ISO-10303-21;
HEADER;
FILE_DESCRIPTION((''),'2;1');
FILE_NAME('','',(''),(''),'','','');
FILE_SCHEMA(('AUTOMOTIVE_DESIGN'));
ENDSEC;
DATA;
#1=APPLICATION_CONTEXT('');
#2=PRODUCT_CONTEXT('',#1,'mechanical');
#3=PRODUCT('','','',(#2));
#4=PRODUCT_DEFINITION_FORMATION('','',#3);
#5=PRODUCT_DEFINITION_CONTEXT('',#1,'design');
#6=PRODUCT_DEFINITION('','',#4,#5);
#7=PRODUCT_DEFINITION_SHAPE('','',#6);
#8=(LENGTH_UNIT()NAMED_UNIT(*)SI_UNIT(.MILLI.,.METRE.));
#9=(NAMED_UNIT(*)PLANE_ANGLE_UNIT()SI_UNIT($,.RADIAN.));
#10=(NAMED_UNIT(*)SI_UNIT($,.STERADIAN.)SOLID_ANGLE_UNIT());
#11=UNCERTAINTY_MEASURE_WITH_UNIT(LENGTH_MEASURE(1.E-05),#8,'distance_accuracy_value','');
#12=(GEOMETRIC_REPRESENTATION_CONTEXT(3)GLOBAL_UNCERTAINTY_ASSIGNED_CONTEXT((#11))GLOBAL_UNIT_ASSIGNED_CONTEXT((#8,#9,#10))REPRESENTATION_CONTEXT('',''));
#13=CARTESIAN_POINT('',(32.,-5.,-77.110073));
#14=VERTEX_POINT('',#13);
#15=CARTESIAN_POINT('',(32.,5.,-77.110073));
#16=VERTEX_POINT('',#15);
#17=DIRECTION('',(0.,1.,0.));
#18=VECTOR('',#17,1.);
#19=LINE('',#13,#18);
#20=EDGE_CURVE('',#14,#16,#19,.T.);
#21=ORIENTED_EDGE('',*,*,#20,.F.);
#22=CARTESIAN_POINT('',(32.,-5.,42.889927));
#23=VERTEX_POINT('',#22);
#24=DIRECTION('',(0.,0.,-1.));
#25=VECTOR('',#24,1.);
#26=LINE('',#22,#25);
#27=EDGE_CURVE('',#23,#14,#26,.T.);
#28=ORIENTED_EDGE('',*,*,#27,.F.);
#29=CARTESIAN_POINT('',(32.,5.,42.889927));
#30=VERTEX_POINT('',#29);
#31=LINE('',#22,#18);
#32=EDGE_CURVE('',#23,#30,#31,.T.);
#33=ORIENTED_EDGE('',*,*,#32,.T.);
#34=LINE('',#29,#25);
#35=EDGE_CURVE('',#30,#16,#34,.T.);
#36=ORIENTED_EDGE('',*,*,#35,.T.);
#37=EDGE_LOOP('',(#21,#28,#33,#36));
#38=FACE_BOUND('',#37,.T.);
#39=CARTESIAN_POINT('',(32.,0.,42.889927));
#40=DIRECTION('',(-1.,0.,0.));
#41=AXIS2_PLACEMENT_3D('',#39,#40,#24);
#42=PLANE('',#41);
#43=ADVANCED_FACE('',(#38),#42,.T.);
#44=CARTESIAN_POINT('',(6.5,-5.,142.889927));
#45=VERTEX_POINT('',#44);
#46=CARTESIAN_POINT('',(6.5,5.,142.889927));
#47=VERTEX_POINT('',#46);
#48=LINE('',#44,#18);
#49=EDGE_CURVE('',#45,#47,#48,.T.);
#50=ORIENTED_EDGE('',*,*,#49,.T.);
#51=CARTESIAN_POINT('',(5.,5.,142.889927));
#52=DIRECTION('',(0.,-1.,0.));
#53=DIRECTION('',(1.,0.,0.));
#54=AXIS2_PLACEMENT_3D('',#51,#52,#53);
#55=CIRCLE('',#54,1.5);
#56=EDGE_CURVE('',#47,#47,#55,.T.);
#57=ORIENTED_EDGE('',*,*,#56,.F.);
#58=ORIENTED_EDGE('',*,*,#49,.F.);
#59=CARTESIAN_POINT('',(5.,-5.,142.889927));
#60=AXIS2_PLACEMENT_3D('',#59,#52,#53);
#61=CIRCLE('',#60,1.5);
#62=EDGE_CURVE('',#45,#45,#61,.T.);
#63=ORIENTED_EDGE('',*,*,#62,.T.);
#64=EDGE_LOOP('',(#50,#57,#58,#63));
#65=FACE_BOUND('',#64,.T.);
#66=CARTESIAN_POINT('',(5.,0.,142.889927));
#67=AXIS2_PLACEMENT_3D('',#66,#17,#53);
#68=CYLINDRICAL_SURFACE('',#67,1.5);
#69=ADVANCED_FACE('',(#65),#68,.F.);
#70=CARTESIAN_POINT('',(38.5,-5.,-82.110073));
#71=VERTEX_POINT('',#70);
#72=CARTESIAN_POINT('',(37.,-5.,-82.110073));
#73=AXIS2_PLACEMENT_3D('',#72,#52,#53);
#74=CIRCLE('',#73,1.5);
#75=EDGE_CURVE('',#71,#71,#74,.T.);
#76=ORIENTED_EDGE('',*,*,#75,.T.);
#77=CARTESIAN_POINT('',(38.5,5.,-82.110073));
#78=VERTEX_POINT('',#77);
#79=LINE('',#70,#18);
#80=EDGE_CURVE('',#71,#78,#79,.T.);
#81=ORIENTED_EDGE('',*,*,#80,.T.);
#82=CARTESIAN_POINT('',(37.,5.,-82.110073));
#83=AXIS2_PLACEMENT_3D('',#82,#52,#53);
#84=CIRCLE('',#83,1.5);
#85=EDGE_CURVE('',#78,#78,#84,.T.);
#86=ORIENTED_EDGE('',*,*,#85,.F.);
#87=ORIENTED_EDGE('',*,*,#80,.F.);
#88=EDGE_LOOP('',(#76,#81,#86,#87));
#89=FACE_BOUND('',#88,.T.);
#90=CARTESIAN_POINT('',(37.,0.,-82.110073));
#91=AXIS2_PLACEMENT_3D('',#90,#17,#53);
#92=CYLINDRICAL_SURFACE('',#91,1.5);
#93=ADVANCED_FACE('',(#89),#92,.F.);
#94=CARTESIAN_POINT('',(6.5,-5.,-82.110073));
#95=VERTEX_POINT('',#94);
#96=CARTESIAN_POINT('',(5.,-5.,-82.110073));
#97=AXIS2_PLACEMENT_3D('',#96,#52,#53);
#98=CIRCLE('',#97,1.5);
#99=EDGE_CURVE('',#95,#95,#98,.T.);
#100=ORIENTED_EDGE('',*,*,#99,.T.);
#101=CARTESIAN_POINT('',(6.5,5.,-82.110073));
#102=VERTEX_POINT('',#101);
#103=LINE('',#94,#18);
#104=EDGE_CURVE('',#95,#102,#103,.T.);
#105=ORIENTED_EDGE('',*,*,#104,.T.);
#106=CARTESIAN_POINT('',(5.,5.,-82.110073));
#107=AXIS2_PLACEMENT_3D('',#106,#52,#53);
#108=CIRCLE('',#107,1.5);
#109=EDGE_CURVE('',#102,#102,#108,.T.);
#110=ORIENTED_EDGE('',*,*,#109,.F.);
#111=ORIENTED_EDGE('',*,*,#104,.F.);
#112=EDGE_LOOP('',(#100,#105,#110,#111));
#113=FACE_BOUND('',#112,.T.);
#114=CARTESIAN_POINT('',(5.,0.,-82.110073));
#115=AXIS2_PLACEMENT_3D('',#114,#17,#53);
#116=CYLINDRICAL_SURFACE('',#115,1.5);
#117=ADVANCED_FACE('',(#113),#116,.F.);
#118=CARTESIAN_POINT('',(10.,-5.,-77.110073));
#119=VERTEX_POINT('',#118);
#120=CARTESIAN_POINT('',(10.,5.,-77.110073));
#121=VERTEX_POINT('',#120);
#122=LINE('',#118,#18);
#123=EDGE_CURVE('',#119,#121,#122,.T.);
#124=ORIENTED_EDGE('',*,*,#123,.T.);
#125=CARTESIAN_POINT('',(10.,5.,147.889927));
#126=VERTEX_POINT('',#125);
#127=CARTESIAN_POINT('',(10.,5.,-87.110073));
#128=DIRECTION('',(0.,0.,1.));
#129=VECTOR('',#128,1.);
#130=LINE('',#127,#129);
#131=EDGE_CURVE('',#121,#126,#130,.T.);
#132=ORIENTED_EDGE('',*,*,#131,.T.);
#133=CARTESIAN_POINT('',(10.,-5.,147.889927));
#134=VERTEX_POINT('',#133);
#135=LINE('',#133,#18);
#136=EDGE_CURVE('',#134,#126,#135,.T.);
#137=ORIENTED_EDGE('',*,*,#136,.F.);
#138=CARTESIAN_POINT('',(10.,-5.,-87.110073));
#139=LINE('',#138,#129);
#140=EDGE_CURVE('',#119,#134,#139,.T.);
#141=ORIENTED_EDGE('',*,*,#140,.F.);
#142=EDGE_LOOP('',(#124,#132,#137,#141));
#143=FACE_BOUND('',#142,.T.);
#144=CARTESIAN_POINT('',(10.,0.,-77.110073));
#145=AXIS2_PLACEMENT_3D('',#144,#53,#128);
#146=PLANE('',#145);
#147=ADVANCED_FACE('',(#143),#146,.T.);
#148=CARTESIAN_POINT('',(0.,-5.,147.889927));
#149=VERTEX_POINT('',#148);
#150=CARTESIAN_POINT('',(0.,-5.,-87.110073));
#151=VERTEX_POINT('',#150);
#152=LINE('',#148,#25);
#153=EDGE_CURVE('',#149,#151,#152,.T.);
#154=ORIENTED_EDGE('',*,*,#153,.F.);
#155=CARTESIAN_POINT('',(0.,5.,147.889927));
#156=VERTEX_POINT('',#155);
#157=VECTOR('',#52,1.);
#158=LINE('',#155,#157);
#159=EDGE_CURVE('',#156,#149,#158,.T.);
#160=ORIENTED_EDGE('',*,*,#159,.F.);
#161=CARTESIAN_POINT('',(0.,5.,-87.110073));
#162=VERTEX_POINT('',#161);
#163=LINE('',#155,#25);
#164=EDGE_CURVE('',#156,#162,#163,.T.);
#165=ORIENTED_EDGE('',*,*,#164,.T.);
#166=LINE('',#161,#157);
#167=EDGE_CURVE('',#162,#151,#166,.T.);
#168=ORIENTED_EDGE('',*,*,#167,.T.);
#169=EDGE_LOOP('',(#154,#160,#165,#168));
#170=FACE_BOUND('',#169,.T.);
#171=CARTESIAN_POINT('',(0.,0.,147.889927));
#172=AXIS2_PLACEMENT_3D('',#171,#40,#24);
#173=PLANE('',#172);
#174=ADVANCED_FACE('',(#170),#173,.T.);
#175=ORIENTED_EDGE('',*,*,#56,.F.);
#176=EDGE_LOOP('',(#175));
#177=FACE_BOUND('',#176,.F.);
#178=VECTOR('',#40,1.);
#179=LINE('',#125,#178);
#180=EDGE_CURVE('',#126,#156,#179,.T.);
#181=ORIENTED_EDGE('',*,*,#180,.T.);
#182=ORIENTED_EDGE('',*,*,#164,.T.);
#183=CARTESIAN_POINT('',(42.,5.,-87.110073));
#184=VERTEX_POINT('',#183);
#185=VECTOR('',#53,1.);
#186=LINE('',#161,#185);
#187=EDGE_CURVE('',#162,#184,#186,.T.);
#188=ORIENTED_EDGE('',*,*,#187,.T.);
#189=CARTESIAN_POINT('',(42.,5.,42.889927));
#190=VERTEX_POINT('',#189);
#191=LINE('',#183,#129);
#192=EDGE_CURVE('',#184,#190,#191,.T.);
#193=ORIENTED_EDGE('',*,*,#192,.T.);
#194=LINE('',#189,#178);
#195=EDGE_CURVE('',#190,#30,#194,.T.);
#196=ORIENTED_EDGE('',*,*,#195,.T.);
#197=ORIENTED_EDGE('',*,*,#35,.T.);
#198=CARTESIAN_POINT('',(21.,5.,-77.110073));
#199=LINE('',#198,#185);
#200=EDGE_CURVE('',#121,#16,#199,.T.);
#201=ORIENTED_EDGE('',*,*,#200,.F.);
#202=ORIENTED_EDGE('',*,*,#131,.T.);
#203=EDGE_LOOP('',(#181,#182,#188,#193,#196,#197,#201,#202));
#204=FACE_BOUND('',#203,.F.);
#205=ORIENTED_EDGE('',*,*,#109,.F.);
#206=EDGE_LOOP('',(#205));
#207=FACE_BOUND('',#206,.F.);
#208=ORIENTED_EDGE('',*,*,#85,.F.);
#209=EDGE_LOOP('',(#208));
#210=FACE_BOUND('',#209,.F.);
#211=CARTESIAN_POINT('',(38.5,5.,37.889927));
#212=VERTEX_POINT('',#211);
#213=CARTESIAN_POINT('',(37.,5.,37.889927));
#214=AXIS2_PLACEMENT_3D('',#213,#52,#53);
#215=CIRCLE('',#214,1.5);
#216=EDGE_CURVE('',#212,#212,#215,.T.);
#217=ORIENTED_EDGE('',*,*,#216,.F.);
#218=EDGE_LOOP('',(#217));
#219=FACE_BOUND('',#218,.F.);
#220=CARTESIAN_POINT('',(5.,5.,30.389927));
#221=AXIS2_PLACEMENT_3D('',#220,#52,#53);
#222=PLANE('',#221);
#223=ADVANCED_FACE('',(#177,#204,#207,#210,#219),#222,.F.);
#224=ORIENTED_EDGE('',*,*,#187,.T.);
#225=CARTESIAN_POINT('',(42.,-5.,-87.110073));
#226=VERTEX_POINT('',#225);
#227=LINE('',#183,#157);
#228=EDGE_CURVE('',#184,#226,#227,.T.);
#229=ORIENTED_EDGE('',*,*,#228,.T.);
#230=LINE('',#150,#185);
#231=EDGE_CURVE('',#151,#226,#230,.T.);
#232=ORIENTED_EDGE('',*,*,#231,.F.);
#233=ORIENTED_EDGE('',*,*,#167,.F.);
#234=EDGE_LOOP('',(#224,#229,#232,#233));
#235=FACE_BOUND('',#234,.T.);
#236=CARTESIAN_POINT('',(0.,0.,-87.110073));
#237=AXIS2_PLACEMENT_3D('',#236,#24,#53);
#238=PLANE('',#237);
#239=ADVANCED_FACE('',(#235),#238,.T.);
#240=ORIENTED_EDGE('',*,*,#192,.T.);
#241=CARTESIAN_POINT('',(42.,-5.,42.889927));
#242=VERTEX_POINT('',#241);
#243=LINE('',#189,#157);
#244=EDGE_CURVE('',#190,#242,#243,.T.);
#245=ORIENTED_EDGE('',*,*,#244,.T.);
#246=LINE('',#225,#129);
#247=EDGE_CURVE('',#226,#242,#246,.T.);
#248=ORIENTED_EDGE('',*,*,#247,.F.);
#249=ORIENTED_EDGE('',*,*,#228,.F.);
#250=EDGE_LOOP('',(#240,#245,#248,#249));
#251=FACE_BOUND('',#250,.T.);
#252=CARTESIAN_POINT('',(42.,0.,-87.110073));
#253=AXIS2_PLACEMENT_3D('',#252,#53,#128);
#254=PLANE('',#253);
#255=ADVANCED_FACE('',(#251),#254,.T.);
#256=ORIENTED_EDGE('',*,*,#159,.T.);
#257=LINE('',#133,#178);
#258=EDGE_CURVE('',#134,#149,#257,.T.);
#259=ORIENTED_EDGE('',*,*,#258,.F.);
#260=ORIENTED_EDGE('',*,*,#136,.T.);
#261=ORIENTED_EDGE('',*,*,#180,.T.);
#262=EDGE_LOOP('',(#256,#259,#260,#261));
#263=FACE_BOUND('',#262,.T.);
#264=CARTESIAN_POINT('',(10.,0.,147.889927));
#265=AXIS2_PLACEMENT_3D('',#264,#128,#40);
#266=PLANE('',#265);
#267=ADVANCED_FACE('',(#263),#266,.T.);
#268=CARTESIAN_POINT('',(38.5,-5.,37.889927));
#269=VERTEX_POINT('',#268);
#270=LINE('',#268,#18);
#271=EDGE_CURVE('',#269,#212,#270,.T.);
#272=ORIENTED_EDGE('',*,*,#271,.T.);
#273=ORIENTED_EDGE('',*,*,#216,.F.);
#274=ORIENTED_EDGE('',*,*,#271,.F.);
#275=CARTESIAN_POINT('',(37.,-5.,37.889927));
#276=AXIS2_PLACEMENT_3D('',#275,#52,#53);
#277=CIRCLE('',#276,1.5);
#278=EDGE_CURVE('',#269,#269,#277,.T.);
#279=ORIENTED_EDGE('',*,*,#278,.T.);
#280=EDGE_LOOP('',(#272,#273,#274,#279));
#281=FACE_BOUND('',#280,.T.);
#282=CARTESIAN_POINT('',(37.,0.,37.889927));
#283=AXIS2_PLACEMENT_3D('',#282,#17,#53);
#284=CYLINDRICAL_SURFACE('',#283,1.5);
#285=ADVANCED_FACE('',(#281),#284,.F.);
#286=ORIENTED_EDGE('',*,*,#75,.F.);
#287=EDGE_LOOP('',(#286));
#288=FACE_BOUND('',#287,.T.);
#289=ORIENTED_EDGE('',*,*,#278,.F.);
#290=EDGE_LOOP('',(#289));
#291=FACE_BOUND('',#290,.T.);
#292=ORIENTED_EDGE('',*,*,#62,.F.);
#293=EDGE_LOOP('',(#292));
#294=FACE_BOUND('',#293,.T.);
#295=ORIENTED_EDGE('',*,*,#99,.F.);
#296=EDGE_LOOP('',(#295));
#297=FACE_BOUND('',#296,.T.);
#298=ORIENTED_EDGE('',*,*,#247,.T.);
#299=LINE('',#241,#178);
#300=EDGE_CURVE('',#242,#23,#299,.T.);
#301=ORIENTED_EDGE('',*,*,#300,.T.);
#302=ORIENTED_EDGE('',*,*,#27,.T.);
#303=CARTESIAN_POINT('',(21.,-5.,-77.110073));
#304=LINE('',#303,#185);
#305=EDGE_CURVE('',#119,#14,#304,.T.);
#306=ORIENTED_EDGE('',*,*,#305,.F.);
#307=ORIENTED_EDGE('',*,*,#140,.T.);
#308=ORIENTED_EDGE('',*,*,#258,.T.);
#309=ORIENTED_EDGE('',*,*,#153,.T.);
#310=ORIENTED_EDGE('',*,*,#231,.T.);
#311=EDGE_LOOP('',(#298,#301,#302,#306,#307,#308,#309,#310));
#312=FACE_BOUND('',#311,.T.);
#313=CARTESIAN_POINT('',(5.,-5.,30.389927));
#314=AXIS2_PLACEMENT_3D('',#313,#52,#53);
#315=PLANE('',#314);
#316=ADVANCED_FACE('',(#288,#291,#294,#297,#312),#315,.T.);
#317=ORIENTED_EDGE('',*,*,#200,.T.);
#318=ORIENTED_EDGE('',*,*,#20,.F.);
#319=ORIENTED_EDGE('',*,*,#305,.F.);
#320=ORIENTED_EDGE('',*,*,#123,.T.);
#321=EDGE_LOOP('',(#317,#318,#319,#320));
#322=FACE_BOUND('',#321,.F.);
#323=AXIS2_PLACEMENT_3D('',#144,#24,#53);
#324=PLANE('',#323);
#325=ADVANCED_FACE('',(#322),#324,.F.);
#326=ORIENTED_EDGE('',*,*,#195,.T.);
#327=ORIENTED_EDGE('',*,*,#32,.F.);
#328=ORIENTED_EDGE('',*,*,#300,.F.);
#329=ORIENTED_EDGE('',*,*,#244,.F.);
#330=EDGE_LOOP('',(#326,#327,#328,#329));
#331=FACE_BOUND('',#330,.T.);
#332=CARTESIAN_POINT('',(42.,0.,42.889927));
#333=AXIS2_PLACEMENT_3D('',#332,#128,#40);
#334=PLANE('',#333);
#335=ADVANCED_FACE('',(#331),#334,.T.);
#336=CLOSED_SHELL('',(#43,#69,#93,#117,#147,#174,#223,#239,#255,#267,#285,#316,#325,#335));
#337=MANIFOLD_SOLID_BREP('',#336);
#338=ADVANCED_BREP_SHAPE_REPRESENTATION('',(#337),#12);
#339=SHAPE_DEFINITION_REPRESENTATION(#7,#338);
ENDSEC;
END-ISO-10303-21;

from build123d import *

# Parameters (mm, degrees)
F0_R     = 1.5
F0_W     = 22
F0_H     = 10
F1_DEPTH = 5
F2_DEPTH = 5


# Not quite as in the source:
# - a feature names something its author has since deleted; it is built from what else it names


with BuildPart() as f1:
    # F0 (on Front) → F1 (new body, symmetric)
    with BuildSketch(Plane.XZ):
        Polygon((10, 147.8899265081), (0, 147.8899265081), (0, -87.1100734919), (10, -87.1100734919), (10, -77.1100734919), align=None)
        with Locations((5, -82.1100734919)):
            Circle(F0_R, mode=Mode.SUBTRACT)
        with Locations((5, 142.8899265081)):
            Circle(F0_R, mode=Mode.SUBTRACT)
        with Locations((21, -82.1100734919)):
            Rectangle(F0_W, F0_H)
        Polygon((32, 42.8899265081), (32, -77.1100734919), (32, -87.1100734919), (42, -87.1100734919), (42, 42.8899265081), align=None)
        with Locations((37, -82.1100734919)):
            Circle(F0_R, mode=Mode.SUBTRACT)
        with Locations((37, 37.8899265081)):
            Circle(F0_R, mode=Mode.SUBTRACT)
    extrude(amount=F1_DEPTH, both=True)

    # F0 (on Front) → F2 (cut, symmetric)
    with BuildSketch(Plane.XZ):
        with Locations((5, -82.1100734919)):
            Circle(F0_R)
        with Locations((37, -82.1100734919)):
            Circle(F0_R)
        with Locations((37, 37.8899265081)):
            Circle(F0_R)
        with Locations((5, 142.8899265081)):
            Circle(F0_R)
    extrude(amount=F2_DEPTH, both=True, mode=Mode.SUBTRACT)


solid = f1.part
